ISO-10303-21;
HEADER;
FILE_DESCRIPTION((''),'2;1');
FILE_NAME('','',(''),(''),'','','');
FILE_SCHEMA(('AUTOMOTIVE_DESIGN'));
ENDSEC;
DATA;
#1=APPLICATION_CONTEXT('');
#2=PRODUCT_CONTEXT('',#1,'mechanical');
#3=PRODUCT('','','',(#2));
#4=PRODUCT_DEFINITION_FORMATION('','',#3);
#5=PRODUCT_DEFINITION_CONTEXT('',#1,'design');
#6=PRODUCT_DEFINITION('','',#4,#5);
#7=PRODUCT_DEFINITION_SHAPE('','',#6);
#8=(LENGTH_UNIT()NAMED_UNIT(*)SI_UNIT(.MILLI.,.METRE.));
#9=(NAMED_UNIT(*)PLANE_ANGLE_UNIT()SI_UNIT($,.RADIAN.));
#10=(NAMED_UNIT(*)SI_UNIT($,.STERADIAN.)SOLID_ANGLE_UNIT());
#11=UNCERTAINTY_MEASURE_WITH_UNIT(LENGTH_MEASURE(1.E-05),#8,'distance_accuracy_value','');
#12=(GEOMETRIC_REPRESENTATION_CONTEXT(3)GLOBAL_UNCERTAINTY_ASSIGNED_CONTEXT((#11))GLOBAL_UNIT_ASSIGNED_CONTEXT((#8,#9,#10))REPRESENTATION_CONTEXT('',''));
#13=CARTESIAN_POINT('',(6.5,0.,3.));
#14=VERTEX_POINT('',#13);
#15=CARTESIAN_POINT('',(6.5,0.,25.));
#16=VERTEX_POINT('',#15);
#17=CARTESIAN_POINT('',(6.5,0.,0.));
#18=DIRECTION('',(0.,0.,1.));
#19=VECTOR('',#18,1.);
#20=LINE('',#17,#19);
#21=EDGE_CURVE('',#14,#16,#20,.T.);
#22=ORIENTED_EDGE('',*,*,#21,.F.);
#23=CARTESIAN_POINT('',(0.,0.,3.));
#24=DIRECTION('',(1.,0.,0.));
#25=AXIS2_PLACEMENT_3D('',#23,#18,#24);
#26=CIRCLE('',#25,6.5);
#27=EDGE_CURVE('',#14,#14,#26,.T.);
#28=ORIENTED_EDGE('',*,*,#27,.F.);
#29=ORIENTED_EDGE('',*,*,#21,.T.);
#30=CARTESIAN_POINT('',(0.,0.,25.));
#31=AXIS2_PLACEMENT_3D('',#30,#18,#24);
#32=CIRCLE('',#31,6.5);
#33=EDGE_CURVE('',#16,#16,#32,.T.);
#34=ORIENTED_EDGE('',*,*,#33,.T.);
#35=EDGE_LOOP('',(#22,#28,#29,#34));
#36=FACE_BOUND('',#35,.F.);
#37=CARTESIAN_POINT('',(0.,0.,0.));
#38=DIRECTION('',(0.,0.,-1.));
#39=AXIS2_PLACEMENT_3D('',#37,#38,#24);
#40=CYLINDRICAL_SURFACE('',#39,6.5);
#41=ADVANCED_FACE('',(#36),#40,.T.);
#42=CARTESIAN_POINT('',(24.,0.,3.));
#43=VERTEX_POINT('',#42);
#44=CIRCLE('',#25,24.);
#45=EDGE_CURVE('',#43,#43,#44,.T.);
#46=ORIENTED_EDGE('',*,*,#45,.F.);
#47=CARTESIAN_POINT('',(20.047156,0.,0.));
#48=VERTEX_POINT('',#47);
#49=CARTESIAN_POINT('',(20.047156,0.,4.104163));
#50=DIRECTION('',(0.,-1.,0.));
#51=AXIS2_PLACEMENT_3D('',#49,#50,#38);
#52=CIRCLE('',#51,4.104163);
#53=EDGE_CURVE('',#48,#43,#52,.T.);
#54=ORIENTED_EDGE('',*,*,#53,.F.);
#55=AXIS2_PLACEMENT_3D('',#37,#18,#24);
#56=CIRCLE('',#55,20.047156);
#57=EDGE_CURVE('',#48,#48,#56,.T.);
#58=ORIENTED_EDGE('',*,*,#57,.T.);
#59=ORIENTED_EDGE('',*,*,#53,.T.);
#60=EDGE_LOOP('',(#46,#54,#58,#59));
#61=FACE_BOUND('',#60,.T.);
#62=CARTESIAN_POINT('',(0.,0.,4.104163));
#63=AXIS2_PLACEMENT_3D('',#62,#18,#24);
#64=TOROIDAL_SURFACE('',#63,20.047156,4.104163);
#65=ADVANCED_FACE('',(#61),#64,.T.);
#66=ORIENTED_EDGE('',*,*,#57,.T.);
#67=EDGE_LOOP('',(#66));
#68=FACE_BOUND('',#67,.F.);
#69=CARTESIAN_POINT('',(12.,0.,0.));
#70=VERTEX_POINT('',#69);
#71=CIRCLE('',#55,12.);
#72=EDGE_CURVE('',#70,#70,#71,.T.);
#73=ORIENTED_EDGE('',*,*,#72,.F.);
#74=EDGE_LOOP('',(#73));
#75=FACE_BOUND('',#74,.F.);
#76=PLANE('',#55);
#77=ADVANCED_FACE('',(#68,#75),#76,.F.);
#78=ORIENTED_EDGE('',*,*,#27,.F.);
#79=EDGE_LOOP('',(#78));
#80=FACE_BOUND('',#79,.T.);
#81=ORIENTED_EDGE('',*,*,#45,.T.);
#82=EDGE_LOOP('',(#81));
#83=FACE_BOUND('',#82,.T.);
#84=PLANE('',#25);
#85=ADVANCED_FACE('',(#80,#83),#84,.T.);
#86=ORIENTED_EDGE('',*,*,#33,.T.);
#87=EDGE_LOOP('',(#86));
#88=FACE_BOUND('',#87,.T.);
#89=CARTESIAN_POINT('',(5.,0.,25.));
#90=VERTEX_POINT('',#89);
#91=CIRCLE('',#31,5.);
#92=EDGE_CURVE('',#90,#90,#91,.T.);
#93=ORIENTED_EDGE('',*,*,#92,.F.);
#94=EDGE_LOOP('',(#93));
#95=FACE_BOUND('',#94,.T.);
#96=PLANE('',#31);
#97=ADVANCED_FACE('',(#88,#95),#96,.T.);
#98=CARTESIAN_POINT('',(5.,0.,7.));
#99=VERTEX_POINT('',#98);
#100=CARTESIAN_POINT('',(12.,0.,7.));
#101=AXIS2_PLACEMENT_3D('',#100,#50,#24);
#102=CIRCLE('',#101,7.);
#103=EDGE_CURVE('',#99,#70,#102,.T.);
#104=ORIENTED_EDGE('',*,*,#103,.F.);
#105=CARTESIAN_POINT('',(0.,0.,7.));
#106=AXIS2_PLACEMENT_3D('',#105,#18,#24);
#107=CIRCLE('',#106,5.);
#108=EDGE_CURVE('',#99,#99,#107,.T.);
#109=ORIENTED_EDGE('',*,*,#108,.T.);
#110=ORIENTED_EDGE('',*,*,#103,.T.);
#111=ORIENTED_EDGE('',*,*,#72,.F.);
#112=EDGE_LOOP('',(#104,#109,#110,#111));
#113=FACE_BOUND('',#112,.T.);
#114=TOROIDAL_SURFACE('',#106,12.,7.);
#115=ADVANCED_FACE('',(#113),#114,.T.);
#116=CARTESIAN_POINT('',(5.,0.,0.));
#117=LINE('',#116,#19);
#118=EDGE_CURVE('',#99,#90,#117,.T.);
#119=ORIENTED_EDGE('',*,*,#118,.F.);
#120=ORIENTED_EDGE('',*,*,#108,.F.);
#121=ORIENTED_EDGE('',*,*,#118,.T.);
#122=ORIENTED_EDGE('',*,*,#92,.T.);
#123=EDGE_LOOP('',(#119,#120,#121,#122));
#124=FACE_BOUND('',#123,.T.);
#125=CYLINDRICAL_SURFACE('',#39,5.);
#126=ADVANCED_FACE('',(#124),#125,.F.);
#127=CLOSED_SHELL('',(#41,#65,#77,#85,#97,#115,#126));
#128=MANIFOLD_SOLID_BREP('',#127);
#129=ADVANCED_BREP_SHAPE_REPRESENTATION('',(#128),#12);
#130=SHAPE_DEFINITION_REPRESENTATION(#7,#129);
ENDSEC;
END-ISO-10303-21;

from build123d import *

# Parameters (mm, degrees)
F0_R     = 24
F0_R_2   = 6.5
F1_DEPTH = 3
F0_R_3   = 5
F2_DEPTH = 25
F3_R     = 7


# Not quite as in the source:
# - a fillet or chamfer that OpenCascade refuses, or shapes differently, is made with other operations: its cross-section is extruded or revolved along the edge and cut away or added


with BuildPart() as f1:
    # F0 (on Top) → F1 (new body)
    with BuildSketch(Plane.XY):
        Circle(F0_R)
        Circle(F0_R_2, mode=Mode.SUBTRACT)
    extrude(amount=F1_DEPTH)

    # F0 (on Top) → F2 (join)
    with BuildSketch(Plane.XY):
        Circle(F0_R_2)
        Circle(F0_R_3, mode=Mode.SUBTRACT)
    extrude(amount=F2_DEPTH)

    # F3
    f3_edges = [f1.edges().sort_by_distance(p)[0] for p in [
        (-5, 0, 0),
    ]]
    fillet(f3_edges, radius=F3_R)

    # F4: fillet of radius 4.104163056 on 1 edges, made by hand

    # F4_s1 → F4_t2 (revolve, cut)
    with BuildSketch(Plane.XZ):
        with BuildLine():
            ThreePointArc((20.0471556651, 0), (22.5283337288, 0.8349261716), (24, 3))
            Line((24, 3), (24, 0))
            Line((24, 0), (20.0471556651, 0))
        make_face()
    revolve(axis=Axis((0, 0, 0), (0, 0, 1)), mode=Mode.SUBTRACT)


solid = f1.part
